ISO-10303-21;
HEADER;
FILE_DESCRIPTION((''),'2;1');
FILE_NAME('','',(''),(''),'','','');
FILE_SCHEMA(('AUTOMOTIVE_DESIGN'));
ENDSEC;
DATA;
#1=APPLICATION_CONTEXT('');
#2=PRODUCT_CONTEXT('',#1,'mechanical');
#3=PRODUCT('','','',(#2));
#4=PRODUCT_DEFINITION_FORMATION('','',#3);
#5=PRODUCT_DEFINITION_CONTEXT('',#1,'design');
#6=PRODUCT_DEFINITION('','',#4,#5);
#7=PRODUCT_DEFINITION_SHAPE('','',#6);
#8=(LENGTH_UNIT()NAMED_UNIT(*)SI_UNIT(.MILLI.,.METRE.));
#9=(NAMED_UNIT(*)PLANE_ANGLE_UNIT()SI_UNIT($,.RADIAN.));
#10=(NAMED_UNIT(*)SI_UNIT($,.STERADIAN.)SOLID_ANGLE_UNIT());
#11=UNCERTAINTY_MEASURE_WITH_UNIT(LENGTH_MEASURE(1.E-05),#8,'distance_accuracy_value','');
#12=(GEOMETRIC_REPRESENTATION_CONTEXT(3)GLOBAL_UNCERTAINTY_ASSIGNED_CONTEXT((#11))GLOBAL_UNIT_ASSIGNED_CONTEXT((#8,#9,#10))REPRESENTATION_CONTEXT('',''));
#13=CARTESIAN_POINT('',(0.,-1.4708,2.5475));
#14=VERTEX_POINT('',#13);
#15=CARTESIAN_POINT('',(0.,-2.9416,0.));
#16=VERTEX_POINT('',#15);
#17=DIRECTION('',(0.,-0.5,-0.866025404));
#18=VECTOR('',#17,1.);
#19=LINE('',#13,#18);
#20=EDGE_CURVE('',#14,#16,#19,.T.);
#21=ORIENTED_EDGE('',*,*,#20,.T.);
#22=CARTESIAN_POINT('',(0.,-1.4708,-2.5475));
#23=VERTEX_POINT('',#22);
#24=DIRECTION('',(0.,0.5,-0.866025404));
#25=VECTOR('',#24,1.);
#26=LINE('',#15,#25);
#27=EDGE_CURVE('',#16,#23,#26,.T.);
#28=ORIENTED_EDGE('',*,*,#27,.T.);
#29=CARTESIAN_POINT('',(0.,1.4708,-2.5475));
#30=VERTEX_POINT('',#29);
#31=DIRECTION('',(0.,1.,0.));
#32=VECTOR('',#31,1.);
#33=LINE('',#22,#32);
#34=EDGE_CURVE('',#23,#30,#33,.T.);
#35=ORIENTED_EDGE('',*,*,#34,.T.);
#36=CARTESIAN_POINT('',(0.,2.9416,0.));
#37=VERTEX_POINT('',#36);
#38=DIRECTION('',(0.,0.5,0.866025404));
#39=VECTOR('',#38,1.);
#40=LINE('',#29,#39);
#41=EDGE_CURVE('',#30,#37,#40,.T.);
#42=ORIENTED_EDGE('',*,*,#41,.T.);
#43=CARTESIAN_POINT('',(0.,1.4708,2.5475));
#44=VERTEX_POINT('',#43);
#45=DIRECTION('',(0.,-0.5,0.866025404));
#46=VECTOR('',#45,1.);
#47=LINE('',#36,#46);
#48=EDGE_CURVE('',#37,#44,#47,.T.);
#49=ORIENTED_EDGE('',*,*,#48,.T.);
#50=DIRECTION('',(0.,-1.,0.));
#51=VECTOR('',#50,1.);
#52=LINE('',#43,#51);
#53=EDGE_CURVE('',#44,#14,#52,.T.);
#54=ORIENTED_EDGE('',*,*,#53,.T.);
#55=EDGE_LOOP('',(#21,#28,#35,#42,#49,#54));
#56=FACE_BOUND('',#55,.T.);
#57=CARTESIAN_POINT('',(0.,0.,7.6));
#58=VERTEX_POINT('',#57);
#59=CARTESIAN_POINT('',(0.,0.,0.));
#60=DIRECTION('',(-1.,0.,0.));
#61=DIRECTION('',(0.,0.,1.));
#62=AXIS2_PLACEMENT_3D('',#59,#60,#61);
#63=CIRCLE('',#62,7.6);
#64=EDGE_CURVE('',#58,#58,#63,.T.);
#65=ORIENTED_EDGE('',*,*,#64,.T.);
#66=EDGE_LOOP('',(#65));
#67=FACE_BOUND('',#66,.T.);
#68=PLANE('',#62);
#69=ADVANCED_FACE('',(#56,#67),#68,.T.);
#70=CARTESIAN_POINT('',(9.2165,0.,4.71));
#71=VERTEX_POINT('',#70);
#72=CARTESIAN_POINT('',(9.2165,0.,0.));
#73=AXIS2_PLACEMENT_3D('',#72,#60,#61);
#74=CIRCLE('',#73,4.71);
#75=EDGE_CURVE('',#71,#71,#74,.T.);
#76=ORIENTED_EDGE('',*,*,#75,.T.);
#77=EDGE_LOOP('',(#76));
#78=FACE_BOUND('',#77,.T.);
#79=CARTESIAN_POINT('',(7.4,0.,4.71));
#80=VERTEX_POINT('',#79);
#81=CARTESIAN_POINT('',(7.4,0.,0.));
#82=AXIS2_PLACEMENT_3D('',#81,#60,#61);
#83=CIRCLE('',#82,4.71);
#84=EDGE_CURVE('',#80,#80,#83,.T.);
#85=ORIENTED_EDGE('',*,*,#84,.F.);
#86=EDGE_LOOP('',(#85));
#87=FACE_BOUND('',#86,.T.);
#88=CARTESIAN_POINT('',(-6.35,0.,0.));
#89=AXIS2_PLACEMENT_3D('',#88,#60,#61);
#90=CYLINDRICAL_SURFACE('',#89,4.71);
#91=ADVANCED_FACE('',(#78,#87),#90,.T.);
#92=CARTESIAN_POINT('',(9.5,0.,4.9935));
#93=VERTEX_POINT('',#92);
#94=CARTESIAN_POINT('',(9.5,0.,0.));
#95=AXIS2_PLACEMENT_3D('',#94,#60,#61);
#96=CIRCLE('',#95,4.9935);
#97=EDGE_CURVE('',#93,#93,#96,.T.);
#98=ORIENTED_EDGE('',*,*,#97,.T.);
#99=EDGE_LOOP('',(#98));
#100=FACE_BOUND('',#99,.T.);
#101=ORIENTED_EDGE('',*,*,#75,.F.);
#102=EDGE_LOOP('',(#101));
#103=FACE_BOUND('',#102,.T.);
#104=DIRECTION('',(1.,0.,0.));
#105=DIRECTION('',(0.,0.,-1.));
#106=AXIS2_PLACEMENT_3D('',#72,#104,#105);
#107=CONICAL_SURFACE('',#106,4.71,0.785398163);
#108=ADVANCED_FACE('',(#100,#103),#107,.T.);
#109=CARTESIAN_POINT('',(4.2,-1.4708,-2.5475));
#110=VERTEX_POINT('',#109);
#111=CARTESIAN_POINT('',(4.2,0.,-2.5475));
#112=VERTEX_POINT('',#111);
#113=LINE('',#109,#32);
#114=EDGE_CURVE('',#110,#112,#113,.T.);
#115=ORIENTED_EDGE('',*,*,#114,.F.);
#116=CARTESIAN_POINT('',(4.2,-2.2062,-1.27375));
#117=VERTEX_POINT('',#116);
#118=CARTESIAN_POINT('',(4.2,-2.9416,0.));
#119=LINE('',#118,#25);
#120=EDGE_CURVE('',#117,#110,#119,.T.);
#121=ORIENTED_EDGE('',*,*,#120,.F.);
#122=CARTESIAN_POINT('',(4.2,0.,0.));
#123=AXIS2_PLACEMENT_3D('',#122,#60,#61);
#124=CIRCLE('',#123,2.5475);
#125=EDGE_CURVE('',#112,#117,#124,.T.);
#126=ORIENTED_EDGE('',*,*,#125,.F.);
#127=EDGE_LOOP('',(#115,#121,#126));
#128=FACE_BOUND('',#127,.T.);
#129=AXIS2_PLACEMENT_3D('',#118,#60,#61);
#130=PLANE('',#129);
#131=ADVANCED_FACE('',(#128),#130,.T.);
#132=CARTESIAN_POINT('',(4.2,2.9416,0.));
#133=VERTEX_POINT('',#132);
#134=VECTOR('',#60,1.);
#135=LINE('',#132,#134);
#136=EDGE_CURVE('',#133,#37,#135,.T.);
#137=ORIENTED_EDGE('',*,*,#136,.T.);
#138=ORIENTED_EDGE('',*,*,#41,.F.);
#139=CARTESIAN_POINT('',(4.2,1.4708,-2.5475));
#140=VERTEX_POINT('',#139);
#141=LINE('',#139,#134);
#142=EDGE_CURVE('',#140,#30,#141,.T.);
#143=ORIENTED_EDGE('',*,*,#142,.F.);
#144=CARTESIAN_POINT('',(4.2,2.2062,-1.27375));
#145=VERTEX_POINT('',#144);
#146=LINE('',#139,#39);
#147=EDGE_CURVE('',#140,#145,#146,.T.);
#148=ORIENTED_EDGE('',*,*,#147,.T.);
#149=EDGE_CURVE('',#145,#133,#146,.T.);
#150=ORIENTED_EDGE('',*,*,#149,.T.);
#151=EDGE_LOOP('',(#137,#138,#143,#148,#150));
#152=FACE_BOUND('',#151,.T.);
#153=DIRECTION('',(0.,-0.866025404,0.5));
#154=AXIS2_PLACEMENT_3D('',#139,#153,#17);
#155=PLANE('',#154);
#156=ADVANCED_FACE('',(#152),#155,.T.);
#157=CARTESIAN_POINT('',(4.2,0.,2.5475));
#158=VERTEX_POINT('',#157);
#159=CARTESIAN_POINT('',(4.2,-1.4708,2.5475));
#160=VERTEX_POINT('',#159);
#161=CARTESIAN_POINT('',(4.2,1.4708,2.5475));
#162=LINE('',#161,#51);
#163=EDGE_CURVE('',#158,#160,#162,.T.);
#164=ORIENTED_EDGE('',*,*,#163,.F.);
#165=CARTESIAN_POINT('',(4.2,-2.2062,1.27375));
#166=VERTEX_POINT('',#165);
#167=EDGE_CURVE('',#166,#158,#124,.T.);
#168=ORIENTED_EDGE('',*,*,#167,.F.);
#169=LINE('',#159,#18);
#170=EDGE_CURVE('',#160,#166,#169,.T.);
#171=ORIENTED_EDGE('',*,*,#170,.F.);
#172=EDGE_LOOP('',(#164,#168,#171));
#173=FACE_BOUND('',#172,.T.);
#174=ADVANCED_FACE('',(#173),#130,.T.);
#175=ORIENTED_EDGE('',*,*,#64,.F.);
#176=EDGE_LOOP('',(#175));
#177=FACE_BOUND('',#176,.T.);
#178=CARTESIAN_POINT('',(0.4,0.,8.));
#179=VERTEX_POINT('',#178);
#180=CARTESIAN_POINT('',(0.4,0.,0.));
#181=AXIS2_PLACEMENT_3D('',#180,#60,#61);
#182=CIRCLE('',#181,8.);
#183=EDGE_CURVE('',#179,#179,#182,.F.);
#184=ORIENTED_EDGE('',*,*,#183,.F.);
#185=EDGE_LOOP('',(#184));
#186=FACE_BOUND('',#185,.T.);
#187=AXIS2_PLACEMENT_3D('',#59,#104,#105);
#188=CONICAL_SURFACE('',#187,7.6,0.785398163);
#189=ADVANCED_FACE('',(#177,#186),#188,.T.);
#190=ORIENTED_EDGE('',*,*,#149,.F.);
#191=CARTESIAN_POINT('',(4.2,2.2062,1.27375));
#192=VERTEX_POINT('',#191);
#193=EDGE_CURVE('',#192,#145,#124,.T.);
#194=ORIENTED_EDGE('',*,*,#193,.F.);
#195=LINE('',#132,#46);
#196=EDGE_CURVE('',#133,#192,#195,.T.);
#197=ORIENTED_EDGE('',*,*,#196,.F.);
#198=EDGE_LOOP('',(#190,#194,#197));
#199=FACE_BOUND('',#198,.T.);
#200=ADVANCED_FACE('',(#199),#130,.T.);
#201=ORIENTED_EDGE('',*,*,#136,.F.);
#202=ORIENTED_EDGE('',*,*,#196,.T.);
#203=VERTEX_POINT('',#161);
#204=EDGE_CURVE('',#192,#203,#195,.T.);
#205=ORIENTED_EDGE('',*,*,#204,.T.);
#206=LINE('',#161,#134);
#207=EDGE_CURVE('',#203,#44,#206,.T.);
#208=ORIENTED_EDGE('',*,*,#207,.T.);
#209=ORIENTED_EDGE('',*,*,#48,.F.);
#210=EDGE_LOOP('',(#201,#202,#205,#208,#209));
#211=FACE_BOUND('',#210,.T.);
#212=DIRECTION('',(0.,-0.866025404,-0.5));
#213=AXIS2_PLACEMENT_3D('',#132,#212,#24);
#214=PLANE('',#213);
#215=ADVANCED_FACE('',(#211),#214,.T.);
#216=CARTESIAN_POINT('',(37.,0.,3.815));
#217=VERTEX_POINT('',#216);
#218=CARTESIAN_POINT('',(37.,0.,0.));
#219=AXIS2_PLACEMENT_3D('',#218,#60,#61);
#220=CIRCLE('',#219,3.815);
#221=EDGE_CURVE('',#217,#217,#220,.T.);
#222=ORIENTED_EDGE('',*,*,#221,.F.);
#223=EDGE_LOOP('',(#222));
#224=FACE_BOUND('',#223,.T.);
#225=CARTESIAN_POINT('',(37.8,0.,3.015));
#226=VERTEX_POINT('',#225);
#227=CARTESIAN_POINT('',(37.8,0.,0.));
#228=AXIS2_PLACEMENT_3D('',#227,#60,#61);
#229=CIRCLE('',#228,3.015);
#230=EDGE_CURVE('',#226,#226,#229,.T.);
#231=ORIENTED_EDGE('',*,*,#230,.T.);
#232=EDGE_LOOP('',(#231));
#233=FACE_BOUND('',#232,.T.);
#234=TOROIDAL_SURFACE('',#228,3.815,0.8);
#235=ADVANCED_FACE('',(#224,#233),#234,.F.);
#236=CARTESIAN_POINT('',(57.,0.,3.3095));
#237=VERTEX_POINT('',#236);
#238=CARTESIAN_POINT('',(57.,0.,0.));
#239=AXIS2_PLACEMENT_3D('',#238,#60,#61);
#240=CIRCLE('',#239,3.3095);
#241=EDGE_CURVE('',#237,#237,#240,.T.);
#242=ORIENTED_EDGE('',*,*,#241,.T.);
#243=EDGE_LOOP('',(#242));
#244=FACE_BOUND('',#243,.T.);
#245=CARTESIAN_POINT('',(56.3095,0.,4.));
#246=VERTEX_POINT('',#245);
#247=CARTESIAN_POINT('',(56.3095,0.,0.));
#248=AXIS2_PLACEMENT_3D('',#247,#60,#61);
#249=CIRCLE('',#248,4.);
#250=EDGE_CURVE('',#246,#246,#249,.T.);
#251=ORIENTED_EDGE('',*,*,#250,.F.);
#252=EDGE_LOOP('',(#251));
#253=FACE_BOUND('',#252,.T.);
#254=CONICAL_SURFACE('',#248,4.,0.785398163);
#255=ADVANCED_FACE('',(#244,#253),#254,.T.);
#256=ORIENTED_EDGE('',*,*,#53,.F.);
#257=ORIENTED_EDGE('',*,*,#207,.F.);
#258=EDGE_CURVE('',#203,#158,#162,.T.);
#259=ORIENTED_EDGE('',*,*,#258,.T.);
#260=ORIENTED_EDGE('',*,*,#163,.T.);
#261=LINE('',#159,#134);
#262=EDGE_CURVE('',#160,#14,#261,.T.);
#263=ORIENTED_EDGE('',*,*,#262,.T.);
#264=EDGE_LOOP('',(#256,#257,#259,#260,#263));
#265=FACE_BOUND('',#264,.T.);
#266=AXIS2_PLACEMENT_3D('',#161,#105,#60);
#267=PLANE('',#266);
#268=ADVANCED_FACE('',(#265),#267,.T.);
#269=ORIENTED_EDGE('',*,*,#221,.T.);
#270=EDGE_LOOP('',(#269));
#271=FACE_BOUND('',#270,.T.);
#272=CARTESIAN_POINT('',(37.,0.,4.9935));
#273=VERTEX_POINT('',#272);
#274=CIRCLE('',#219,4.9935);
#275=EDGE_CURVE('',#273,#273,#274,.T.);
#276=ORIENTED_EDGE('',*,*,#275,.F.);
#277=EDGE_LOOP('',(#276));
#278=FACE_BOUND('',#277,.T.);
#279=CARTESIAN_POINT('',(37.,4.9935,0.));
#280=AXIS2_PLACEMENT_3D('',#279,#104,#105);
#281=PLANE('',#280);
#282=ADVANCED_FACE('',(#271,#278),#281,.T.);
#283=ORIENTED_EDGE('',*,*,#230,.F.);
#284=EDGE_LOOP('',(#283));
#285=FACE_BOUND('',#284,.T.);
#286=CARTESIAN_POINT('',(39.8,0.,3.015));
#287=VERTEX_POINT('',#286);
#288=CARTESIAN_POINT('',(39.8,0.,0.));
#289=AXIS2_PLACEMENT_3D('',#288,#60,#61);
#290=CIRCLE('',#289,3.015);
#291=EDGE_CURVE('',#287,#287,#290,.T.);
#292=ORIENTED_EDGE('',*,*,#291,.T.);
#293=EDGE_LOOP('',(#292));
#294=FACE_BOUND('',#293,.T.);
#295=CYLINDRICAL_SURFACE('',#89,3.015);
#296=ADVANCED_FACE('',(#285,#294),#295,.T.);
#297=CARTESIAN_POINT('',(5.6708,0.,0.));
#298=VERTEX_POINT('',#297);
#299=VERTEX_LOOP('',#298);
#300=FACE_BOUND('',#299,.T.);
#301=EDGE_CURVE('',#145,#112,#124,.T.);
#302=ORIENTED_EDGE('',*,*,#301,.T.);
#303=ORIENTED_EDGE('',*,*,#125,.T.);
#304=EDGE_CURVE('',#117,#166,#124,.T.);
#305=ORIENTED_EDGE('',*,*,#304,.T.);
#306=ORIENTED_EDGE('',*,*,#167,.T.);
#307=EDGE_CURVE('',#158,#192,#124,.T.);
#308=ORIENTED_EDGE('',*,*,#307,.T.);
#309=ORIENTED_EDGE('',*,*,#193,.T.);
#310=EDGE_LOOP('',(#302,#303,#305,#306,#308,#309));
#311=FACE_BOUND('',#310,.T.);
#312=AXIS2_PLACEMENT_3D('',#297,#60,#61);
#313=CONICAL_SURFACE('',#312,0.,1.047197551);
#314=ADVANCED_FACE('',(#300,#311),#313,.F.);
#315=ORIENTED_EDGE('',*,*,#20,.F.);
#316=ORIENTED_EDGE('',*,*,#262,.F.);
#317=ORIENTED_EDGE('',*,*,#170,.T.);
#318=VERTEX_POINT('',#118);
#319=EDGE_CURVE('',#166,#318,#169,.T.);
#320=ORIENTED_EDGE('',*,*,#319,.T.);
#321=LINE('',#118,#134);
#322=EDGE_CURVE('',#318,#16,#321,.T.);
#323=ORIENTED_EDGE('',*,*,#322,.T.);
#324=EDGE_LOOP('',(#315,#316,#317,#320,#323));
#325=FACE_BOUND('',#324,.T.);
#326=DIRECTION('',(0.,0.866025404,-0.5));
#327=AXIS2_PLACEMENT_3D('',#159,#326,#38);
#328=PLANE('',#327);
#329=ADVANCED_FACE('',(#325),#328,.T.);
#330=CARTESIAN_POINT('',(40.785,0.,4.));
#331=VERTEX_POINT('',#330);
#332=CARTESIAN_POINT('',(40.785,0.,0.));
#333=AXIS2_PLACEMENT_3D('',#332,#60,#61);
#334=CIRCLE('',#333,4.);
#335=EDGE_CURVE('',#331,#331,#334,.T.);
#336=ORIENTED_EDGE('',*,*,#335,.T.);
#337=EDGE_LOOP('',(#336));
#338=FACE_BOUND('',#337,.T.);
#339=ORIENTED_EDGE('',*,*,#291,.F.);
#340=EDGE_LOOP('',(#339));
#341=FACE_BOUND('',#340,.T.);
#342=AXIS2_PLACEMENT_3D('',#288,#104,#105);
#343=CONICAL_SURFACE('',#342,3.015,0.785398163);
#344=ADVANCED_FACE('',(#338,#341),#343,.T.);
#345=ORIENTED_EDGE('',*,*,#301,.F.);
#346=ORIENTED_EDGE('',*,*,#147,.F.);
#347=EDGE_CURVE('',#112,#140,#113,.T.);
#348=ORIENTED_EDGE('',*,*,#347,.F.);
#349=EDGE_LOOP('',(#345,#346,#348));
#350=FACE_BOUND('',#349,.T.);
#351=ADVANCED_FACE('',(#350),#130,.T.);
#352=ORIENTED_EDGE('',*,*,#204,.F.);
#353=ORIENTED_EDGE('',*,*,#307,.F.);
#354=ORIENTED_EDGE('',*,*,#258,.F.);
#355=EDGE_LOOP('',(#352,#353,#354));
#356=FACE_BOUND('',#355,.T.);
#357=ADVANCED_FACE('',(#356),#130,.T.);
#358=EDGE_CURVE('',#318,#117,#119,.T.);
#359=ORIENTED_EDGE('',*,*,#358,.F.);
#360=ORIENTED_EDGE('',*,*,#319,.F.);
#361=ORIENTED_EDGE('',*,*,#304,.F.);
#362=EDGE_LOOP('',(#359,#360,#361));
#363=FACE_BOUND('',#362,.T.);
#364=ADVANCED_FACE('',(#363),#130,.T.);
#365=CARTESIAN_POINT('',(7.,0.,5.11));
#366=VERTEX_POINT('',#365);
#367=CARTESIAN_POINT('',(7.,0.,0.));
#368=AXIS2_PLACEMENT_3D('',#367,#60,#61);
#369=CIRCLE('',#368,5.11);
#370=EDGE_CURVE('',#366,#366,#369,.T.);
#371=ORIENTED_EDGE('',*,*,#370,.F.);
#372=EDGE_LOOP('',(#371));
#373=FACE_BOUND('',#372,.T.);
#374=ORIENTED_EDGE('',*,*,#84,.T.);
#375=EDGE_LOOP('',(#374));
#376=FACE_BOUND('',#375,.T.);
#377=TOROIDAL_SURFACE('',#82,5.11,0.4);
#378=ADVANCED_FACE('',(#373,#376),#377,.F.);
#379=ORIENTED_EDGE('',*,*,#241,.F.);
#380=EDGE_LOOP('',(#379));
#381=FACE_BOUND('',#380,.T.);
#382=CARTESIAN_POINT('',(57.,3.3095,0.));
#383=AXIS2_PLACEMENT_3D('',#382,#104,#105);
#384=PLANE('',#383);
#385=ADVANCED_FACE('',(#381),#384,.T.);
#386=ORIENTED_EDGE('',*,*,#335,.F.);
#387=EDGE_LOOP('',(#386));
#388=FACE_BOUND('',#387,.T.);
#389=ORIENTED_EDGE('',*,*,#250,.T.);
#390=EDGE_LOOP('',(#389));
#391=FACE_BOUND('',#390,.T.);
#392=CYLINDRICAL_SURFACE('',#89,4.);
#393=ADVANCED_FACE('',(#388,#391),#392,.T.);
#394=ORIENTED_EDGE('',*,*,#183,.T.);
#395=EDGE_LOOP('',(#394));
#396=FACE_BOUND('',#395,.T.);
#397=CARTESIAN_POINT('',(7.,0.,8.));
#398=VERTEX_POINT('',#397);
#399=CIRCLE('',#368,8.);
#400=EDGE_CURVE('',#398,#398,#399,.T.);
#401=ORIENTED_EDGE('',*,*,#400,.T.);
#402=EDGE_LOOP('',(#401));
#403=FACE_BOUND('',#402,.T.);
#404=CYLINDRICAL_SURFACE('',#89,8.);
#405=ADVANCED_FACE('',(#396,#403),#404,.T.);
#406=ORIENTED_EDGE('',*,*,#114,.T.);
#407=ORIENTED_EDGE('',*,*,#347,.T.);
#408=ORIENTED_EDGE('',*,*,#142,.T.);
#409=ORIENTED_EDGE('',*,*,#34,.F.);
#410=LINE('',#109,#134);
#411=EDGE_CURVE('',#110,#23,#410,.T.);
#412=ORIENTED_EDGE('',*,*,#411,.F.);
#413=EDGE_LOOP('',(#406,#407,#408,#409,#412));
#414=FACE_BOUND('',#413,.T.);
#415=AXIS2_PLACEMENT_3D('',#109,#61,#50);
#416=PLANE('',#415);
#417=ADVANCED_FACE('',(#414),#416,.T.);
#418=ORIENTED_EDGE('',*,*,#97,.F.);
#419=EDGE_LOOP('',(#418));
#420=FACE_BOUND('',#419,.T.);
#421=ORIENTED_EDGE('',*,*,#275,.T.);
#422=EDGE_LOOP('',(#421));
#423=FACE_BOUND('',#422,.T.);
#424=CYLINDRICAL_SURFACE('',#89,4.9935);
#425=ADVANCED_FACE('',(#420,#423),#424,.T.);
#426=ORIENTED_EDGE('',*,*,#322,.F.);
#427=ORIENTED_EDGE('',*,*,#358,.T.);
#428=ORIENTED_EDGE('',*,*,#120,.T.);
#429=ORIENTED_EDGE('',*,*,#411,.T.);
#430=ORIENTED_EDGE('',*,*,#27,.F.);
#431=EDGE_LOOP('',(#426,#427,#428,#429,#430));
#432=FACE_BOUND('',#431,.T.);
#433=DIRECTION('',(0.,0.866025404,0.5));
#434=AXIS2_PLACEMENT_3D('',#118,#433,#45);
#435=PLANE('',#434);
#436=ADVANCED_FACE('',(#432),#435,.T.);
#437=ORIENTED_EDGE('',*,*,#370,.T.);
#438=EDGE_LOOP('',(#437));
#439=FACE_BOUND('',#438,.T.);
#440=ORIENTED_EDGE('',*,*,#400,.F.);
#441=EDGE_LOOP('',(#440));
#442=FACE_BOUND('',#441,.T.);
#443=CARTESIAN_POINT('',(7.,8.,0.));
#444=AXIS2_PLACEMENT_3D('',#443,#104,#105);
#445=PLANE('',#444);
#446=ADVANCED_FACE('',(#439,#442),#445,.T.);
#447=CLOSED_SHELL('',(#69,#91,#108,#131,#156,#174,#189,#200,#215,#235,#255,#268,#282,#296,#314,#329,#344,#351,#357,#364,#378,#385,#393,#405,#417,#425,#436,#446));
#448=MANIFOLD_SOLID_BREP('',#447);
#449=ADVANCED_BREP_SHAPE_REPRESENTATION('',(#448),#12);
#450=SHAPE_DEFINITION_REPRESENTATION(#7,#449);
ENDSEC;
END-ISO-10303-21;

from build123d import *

# Parameters (mm, degrees)
CHAMFER1_SIZE = 0.4
HEX_2_DEPTH   = 4.2


# Read off the part's stored shape, not the designer's step: ThreadSchematic
with BuildPart() as part:
    # ThreadSchematic outline → ThreadSchematic (revolve)
    with BuildSketch(Plane.YX):
        with BuildLine():
            Line((0, 57), (0, 0))
            Line((0, 0), (8, 0))
            Line((8, 0), (8, 7))
            Line((8, 7), (5.11, 7))
            ThreePointArc((5.11, 7), (4.827157288, 7.117157288), (4.71, 7.4))
            Line((4.71, 7.4), (4.71, 9.2165))
            Line((4.71, 9.2165), (4.9935, 9.5))
            Line((4.9935, 9.5), (4.9935, 37))
            Line((4.9935, 37), (3.815, 37))
            ThreePointArc((3.815, 37), (3.249314575, 37.234314575), (3.015, 37.8))
            Line((3.015, 37.8), (3.015, 39.8))
            Line((3.015, 39.8), (4, 40.785))
            Line((4, 40.785), (4, 56.3095))
            Line((4, 56.3095), (3.3095, 57))
            Line((3.3095, 57), (0, 57))
        make_face()
    revolve(axis=Axis((0, 0, 0), (1, 0, 0)))

    # Chamfer1
    chamfer1_edges = [part.edges().sort_by_distance(p)[0] for p in [
        (0, -8, 0),
    ]]
    chamfer(chamfer1_edges, length=CHAMFER1_SIZE)

    # Sketch2 → PreBroach (revolve, cut)
    with BuildSketch(Plane.XY, mode=Mode.PRIVATE) as prebroach_sk:
        Polygon((0, 2.5475), (4.2, 2.5475), (5.670799811, 0), (0, 0), align=None)
    revolve(prebroach_sk.sketch.rotate(Axis((0, 0, 0), (1, 0, 0)), 90), axis=Axis((0, 0, 0), (1, 0, 0)), mode=Mode.SUBTRACT)

    # Sketch3 → Hex 2 (cut)
    with BuildSketch(Plane.ZY):
        Polygon((-2.5475, -1.470799811), (-2.5475, 1.470799811), (0, 2.941599622), (2.5475, 1.470799811), (2.5475, -1.470799811), (0, -2.941599622), align=None)
    extrude(amount=-HEX_2_DEPTH, mode=Mode.SUBTRACT)


solid = part.part
